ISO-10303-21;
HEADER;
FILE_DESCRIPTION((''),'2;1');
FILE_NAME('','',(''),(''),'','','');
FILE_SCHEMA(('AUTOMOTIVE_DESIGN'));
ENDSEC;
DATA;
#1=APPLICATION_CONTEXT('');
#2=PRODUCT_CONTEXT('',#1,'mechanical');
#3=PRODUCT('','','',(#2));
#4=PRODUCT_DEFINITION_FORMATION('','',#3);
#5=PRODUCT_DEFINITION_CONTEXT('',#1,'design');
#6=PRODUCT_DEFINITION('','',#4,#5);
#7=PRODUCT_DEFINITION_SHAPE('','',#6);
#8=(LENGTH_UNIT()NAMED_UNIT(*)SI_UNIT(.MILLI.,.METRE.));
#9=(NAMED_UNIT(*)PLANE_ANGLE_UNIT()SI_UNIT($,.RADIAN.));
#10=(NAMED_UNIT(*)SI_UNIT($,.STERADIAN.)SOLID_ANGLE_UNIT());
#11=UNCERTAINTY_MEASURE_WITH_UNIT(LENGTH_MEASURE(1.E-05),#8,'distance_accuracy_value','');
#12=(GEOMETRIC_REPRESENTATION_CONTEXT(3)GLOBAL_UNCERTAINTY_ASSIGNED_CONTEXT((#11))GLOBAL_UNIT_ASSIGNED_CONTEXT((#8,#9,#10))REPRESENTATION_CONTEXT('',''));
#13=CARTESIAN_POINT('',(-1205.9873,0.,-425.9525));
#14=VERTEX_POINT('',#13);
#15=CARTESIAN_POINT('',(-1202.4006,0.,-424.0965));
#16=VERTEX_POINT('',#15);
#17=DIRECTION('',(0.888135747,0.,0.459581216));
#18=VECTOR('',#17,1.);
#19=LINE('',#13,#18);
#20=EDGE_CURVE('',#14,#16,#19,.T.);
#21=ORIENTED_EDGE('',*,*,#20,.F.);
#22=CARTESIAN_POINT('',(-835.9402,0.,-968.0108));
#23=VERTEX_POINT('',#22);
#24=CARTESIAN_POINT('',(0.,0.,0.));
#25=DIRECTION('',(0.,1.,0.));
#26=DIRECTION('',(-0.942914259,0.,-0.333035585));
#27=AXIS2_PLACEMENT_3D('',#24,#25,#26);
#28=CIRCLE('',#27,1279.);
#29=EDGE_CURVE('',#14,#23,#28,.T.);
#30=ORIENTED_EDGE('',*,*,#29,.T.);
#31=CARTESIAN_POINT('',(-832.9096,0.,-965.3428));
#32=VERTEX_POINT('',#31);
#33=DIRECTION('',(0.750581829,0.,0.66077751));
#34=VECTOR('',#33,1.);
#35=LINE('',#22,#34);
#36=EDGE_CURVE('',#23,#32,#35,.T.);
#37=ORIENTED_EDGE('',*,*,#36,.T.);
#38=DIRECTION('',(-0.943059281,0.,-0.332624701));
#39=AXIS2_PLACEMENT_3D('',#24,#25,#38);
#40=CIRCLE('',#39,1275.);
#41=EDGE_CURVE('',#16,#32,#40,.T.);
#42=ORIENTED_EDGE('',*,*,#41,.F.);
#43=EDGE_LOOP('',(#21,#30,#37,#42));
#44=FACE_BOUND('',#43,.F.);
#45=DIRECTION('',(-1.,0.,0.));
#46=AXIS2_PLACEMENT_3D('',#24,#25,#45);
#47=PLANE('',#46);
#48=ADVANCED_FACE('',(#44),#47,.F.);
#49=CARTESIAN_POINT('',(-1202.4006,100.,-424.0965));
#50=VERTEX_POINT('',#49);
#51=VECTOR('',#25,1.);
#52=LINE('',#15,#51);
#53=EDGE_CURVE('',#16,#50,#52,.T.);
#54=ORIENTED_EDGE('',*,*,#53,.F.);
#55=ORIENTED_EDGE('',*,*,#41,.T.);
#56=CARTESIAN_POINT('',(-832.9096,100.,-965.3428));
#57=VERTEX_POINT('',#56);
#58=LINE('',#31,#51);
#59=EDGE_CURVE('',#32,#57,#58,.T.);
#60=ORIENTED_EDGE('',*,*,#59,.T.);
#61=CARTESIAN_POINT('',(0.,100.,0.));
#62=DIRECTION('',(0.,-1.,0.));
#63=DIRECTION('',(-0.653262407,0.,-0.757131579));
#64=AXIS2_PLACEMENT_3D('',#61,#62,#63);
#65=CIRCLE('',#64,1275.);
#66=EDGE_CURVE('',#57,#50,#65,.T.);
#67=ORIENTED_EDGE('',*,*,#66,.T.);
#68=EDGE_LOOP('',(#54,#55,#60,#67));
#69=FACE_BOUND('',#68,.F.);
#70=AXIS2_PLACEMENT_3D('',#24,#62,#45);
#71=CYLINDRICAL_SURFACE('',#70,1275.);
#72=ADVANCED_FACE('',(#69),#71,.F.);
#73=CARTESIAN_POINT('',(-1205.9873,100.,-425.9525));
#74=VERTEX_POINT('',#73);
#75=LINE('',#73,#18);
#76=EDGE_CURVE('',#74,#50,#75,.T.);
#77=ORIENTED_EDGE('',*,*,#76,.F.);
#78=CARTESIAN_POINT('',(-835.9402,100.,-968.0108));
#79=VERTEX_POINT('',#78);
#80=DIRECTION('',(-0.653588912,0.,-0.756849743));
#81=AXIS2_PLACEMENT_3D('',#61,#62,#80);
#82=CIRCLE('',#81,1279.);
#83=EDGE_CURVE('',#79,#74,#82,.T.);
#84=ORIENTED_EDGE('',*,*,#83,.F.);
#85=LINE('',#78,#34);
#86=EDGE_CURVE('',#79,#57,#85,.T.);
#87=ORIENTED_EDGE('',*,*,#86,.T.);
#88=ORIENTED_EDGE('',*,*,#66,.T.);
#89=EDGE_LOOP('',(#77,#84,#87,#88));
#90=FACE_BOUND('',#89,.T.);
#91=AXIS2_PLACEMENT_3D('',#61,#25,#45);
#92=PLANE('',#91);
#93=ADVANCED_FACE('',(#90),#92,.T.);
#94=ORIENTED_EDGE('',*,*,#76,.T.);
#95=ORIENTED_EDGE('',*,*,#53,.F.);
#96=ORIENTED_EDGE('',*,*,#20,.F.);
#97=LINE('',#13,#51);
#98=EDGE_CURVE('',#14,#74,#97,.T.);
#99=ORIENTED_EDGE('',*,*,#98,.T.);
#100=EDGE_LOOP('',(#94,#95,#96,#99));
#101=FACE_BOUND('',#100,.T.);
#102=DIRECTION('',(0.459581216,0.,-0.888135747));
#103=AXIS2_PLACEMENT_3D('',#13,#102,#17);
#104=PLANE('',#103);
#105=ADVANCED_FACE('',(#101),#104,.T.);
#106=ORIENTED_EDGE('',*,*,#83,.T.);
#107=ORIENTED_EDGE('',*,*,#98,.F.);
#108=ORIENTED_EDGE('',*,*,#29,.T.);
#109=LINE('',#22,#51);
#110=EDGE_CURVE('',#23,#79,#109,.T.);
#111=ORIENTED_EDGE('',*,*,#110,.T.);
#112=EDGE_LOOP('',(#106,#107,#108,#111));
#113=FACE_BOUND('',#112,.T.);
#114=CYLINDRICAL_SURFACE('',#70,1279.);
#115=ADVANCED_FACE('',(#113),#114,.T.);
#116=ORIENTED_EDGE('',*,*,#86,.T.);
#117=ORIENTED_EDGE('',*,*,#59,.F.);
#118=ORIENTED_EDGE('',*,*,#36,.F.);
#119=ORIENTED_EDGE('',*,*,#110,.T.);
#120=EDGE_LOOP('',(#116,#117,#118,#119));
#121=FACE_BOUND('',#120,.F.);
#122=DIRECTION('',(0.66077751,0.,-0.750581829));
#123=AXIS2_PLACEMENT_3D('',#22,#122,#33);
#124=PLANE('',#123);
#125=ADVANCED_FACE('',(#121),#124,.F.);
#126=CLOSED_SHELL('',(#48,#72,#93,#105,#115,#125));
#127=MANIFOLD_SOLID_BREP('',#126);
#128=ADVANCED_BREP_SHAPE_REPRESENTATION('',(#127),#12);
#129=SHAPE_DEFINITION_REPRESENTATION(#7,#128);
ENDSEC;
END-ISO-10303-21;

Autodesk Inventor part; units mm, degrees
ref_plane "YZ Plane" through (0, 0, 0) normal (1, 0, 0) x (0, 1, 0)
ref_plane "XZ Plane" through (0, 0, 0) normal (0, 1, 0) x (-1, 0, 0)
ref_plane "XY Plane" through (0, 0, 0) normal (0, 0, 1) x (1, 0, 0)
sketch "Sketch1" plane through (0, 0, 0) normal (0, 1, 0) x (-1, 0, 0)
  circle A0 centre (0, 0) radius 1275
  circle A1 centre (0, 0) radius 1279
  dimension "d0" = 2550
  dimension "d1" = 2558
extrude "Extrusion1" add sketch "Sketch1" along normal blind 100
sketch "Sketch2" plane through (0, 0, 0) normal (0, -1, 0) x (1, 0, 0)
  line L0 (-601.6734, -761.7695) -> (-832.5638, -965.0384) projected
  line L1 (-1202.4006, -424.0965) -> (-929.1876, -282.72) projected
  circle A0 centre (0, 0) radius 1279 projected
  line L2 (-835.9402, -968.0108) -> (-832.9096, -965.3428)
  circle A1 centre (0, 0) radius 1275 projected
  line L3 (-1205.9873, -425.9525) -> (-1202.4006, -424.0965)
extrude "Extrusion2" cut sketch "Sketch2" against normal blind 100 contours L3 A1 L2 A0 picked at (-1198.0722, -439.4962)
properties part number "Edge Band - Platform D Outer" material "Wood (Birch)"
